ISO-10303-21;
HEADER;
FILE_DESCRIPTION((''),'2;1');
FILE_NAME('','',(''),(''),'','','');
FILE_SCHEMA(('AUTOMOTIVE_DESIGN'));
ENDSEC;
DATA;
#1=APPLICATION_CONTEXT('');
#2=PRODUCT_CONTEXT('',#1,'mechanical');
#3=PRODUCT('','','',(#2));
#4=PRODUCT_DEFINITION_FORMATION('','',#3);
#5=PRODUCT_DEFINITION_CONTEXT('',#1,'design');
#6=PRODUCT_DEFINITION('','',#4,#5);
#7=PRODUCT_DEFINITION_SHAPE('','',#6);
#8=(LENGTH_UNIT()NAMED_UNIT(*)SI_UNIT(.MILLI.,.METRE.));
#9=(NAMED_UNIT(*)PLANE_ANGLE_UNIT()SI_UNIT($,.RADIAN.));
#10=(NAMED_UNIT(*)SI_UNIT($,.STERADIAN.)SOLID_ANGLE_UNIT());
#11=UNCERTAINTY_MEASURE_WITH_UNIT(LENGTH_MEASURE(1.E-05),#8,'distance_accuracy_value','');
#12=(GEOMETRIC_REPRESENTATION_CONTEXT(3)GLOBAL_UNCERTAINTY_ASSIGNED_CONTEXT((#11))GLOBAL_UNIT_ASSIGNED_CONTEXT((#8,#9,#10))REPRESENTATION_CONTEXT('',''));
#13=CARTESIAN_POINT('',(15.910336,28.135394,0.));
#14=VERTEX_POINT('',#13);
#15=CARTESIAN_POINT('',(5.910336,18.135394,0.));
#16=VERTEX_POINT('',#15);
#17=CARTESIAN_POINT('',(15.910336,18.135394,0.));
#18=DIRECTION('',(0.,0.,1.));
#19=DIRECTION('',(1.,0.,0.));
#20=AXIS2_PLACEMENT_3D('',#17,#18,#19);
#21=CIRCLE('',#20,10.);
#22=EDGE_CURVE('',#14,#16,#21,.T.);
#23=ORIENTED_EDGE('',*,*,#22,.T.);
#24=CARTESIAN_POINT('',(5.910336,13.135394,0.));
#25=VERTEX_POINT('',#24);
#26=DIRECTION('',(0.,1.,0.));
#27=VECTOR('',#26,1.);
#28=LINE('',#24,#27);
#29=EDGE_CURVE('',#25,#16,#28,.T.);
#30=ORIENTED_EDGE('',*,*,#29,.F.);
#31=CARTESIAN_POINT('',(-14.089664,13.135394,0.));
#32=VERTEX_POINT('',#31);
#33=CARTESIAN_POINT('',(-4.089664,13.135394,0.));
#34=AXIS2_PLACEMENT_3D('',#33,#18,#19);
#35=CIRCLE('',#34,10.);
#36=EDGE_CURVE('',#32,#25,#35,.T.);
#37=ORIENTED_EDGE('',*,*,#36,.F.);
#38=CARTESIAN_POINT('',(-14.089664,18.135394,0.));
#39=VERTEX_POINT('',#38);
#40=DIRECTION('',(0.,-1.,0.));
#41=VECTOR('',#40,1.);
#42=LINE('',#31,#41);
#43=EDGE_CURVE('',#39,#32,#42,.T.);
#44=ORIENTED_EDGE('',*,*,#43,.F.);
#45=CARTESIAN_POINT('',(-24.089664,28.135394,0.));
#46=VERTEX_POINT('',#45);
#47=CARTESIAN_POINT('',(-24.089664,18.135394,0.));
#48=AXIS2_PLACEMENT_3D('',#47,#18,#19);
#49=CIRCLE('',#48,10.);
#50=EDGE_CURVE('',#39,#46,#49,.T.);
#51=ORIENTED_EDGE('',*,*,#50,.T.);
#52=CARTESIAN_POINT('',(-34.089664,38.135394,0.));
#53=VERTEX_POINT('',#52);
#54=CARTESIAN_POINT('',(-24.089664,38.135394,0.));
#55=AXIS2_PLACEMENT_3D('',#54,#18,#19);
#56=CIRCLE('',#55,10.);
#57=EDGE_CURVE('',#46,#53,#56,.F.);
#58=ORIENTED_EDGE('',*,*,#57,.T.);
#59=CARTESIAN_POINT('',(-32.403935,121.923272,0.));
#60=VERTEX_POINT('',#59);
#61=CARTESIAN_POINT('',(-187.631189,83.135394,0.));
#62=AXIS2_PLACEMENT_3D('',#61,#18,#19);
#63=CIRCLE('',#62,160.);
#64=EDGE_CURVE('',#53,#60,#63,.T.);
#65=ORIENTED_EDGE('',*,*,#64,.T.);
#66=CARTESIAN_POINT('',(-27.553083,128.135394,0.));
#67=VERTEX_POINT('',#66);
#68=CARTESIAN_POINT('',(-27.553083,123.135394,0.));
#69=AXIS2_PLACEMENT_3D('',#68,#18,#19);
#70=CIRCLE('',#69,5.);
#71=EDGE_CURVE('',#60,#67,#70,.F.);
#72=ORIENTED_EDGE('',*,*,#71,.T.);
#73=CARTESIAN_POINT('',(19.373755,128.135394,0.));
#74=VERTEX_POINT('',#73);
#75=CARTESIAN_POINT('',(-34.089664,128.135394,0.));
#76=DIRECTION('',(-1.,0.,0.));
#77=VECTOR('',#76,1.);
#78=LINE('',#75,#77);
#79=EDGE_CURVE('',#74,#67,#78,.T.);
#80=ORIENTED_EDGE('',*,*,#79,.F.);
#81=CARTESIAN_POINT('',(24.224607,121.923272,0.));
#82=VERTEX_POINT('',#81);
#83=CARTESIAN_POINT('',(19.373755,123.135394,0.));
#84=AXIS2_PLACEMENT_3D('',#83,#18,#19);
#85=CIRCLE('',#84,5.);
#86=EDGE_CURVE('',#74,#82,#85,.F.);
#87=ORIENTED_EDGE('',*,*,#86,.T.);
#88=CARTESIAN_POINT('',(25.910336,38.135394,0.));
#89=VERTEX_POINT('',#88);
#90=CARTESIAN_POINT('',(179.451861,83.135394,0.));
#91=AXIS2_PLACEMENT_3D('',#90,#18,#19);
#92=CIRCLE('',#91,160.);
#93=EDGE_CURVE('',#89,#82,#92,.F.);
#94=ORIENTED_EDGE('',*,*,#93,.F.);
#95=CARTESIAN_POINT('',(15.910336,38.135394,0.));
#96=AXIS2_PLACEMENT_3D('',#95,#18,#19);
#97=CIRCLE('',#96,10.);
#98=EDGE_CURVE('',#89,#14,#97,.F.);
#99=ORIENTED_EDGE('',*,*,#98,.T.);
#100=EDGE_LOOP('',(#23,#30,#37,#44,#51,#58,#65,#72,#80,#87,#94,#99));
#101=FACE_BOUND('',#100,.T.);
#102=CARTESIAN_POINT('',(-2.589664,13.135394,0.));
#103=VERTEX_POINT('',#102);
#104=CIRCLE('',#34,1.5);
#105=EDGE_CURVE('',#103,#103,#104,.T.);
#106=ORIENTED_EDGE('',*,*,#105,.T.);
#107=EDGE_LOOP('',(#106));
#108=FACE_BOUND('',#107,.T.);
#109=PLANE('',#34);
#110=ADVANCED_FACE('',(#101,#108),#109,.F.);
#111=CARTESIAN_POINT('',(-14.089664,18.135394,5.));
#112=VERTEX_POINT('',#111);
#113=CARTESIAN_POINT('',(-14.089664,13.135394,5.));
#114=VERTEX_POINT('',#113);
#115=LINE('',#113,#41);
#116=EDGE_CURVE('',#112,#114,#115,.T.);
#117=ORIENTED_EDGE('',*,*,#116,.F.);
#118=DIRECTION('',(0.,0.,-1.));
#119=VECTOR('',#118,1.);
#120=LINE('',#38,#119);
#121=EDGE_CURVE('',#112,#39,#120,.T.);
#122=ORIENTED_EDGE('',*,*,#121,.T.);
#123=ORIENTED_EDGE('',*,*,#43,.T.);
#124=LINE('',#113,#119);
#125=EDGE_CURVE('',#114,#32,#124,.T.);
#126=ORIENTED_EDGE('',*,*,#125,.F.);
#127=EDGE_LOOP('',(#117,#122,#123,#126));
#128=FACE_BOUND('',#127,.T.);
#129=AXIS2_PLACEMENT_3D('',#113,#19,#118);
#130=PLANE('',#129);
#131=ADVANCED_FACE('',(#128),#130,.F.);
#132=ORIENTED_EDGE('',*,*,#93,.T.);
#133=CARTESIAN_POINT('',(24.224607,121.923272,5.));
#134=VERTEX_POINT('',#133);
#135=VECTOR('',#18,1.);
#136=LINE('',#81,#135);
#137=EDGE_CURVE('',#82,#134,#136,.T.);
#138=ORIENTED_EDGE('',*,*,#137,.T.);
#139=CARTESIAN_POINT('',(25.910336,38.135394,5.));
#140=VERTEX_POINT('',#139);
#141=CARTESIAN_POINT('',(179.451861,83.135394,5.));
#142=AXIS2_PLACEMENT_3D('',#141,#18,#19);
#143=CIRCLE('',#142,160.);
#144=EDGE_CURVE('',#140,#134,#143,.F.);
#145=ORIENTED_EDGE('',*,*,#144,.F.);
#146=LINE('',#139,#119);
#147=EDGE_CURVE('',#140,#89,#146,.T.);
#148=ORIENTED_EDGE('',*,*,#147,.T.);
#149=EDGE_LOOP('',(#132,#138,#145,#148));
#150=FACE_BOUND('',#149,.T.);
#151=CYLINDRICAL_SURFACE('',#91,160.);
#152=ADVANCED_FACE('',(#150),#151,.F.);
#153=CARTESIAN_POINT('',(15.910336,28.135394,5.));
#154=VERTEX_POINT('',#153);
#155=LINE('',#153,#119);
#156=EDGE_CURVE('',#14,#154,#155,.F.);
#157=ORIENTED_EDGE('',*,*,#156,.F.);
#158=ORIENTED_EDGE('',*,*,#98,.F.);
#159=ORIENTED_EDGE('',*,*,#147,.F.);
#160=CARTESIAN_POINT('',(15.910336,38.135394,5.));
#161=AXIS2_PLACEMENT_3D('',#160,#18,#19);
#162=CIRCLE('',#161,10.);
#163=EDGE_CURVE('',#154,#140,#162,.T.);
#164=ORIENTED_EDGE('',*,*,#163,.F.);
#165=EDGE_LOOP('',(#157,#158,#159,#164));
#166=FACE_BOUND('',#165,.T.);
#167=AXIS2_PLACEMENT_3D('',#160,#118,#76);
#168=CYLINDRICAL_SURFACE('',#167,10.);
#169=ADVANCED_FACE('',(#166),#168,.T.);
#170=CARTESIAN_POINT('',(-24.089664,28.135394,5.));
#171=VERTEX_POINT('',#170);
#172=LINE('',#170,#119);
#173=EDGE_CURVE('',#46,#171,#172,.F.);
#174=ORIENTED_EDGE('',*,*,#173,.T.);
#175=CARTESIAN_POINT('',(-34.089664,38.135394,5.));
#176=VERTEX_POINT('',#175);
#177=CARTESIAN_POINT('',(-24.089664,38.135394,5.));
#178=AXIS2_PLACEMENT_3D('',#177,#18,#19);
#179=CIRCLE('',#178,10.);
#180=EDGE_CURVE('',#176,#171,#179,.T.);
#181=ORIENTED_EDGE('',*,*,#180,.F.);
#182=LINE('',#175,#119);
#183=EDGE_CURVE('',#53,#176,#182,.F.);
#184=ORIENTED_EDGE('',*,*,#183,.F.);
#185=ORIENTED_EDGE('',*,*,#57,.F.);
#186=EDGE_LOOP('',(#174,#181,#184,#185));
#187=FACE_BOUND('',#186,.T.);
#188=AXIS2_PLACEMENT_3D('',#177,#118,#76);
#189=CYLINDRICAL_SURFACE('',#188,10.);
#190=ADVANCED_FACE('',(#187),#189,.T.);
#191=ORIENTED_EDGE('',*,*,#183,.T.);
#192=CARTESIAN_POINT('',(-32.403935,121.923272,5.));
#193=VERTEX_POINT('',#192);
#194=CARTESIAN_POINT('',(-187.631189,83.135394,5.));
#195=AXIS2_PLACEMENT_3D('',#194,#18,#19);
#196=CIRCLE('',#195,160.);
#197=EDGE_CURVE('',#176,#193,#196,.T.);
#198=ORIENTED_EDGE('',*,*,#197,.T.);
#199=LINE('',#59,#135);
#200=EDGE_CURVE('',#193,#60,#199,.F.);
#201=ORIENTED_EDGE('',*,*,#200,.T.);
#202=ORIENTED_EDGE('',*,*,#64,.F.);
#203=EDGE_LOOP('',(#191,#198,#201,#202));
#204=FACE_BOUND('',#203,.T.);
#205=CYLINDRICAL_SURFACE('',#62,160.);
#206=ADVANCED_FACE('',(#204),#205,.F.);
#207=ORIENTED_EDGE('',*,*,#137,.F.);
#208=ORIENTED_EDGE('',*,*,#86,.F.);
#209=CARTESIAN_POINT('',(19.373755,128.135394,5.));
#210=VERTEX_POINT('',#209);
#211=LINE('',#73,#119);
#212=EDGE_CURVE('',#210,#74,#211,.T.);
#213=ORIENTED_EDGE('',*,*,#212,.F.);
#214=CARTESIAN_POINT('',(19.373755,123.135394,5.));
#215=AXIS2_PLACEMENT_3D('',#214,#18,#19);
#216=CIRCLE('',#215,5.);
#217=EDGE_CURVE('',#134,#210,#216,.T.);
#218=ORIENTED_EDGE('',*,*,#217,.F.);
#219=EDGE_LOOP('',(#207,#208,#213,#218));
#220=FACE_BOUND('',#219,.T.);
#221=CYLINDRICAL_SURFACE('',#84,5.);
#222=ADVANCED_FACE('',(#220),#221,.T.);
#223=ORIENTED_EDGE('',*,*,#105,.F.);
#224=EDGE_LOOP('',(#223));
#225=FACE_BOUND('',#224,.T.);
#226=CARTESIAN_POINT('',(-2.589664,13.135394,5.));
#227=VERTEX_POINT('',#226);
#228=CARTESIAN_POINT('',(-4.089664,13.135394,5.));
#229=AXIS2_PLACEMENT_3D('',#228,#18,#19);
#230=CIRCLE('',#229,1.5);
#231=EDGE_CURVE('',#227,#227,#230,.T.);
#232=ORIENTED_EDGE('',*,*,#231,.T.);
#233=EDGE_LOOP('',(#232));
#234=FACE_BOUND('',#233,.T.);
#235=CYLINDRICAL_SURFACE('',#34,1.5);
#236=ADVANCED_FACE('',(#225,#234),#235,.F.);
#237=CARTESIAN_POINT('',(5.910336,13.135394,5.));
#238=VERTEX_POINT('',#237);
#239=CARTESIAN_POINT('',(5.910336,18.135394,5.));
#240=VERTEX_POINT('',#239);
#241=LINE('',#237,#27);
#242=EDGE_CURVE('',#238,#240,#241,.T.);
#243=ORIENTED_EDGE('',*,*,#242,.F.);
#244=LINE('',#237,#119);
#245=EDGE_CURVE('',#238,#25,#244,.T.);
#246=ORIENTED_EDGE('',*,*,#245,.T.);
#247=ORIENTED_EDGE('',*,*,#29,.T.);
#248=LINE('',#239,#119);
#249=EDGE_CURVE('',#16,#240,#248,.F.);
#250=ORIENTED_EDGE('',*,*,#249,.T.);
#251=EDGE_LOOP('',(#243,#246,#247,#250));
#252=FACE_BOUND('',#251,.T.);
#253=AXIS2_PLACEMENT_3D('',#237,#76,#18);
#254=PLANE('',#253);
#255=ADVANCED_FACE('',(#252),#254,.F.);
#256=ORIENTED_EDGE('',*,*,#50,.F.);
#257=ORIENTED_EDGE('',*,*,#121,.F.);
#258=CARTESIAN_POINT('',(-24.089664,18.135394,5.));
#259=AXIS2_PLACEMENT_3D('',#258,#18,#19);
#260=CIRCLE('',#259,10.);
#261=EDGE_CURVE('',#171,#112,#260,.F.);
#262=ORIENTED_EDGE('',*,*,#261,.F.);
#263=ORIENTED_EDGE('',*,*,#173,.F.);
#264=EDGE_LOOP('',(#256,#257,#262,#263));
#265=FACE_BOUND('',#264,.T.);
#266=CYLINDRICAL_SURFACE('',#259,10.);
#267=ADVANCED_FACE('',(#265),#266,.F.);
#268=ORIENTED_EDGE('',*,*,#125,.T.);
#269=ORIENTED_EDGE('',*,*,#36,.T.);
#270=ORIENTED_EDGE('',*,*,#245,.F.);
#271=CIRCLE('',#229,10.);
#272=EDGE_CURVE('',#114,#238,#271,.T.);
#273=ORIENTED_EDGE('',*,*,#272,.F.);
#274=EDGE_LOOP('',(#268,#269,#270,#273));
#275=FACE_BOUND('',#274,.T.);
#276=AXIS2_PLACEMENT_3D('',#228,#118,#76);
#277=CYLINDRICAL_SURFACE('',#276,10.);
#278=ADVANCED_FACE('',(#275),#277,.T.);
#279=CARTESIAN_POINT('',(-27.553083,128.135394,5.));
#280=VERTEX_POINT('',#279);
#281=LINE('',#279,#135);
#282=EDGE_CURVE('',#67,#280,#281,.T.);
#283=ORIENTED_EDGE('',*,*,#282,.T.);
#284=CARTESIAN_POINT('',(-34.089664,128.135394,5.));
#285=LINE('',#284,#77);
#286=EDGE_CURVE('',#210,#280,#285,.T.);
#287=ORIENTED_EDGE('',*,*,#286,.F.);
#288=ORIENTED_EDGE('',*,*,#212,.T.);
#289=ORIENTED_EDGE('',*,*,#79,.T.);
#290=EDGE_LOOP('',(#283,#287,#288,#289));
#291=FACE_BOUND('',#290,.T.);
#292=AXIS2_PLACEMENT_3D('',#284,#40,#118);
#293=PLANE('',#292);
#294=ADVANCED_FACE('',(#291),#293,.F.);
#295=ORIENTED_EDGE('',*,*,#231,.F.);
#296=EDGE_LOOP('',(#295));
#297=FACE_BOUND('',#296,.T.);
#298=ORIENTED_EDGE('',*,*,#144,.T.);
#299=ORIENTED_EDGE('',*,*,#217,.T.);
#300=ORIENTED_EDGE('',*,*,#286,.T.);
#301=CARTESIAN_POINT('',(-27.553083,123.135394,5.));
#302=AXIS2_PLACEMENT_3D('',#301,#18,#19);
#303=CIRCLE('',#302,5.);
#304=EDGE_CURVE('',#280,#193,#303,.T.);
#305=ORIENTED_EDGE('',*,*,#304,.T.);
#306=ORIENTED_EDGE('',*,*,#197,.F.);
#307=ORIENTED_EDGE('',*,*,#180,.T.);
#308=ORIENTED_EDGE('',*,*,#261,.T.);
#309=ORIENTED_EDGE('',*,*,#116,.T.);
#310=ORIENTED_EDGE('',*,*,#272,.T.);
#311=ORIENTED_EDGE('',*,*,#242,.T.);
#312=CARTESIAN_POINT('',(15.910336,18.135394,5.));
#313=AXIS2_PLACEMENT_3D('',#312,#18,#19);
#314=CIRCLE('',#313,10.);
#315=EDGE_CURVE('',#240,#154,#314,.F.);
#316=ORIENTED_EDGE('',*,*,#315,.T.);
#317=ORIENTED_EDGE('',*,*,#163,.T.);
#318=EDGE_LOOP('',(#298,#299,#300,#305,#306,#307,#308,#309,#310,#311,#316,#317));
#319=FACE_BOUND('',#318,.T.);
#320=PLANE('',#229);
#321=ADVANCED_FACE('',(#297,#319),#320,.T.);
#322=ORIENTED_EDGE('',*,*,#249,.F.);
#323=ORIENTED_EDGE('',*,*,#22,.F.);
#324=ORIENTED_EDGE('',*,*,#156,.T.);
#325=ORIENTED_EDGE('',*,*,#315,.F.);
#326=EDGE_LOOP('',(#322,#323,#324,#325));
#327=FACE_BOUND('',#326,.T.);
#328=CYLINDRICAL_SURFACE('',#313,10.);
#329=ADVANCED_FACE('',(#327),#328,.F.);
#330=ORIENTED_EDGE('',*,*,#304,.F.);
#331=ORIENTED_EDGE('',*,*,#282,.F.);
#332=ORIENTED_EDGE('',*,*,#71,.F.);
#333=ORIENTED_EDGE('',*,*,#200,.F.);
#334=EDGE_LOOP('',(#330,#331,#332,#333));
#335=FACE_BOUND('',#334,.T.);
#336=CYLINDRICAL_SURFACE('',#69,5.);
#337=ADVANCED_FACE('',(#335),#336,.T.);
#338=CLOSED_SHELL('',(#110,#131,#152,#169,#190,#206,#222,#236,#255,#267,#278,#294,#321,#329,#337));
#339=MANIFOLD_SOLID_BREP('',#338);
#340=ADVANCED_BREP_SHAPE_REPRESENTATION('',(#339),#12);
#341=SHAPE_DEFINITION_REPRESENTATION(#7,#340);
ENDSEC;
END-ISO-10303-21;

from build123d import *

# Parameters (mm, degrees)
RESSALTO_EXTRUS_O1_DEPTH = 5
ESBO_O2_R                = 1.5
CORTE_EXTRUS_O1_DEPTH    = 5
FILETE1_R                = 10
CORTE_EXTRUS_O2_DEPTH    = 5
FILETE2_R                = 5


with BuildPart() as part:
    # Esboço1 → Ressalto-extrusão1 (new body)
    with BuildSketch(Plane.XY):
        with BuildLine():
            Line((-14.089663978, 13.135393664), (-14.089663978, 28.135393664))
            Line((-14.089663978, 28.135393664), (-34.089663978, 28.135393664))
            Line((-34.089663978, 28.135393664), (-34.089663978, 128.135393664))
            Line((-34.089663978, 128.135393664), (25.910336022, 128.135393664))
            Line((25.910336022, 128.135393664), (25.910336022, 28.135393664))
            Line((25.910336022, 28.135393664), (5.910336022, 28.135393664))
            Line((5.910336022, 28.135393664), (5.910336022, 13.135393664))
            ThreePointArc((5.910336022, 13.135393664), (-4.089663978, 3.135393664), (-14.089663978, 13.135393664))
        make_face()
    extrude(amount=RESSALTO_EXTRUS_O1_DEPTH)

    # Esboço2 → Corte-extrusão1 (cut)
    with BuildSketch(Plane.XY.offset(5)):
        with Locations((-4.089663978, 13.135393664)):
            Circle(ESBO_O2_R)
    extrude(amount=-CORTE_EXTRUS_O1_DEPTH, mode=Mode.SUBTRACT)

    # Filete1
    filete1_edges = [part.edges().sort_by_distance(p)[0] for p in [
        (5.910336022, 28.135393664, 2.5),
        (-14.089663978, 28.135393664, 2.5),
    ]]
    fillet(filete1_edges, radius=FILETE1_R)
    filete1_2_edges = [part.edges().sort_by_distance(p)[0] for p in [
        (25.910336022, 28.135393664, 2.5),
        (-34.089663978, 28.135393664, 2.5),
    ]]
    fillet(filete1_2_edges, radius=FILETE1_R - 0.0001)  # a hair under: the kernel refuses the full size

    # Esboço3 → Corte-extrusão2 (cut)
    with BuildSketch(Plane.XY.offset(5)):
        with BuildLine():
            ThreePointArc((-34.089663978, 38.135393664), (-27.631189305, 83.135393664), (-34.089663978, 128.135393664))
            Line((-34.089663978, 128.135393664), (-34.089663978, 38.135393664))
        make_face()
        with BuildLine():
            ThreePointArc((25.910336022, 38.135393664), (19.45186135, 83.135393664), (25.910336022, 128.135393664))
            Line((25.910336022, 128.135393664), (25.910336022, 38.135393664))
        make_face()
    extrude(amount=-CORTE_EXTRUS_O2_DEPTH, mode=Mode.SUBTRACT)

    # Filete2
    filete2_edges = [part.edges().sort_by_distance(p)[0] for p in [
        (-34.089663978, 128.135393664, 2.5),
        (25.910336022, 128.135393664, 2.5),
    ]]
    fillet(filete2_edges, radius=FILETE2_R)


solid = part.part
